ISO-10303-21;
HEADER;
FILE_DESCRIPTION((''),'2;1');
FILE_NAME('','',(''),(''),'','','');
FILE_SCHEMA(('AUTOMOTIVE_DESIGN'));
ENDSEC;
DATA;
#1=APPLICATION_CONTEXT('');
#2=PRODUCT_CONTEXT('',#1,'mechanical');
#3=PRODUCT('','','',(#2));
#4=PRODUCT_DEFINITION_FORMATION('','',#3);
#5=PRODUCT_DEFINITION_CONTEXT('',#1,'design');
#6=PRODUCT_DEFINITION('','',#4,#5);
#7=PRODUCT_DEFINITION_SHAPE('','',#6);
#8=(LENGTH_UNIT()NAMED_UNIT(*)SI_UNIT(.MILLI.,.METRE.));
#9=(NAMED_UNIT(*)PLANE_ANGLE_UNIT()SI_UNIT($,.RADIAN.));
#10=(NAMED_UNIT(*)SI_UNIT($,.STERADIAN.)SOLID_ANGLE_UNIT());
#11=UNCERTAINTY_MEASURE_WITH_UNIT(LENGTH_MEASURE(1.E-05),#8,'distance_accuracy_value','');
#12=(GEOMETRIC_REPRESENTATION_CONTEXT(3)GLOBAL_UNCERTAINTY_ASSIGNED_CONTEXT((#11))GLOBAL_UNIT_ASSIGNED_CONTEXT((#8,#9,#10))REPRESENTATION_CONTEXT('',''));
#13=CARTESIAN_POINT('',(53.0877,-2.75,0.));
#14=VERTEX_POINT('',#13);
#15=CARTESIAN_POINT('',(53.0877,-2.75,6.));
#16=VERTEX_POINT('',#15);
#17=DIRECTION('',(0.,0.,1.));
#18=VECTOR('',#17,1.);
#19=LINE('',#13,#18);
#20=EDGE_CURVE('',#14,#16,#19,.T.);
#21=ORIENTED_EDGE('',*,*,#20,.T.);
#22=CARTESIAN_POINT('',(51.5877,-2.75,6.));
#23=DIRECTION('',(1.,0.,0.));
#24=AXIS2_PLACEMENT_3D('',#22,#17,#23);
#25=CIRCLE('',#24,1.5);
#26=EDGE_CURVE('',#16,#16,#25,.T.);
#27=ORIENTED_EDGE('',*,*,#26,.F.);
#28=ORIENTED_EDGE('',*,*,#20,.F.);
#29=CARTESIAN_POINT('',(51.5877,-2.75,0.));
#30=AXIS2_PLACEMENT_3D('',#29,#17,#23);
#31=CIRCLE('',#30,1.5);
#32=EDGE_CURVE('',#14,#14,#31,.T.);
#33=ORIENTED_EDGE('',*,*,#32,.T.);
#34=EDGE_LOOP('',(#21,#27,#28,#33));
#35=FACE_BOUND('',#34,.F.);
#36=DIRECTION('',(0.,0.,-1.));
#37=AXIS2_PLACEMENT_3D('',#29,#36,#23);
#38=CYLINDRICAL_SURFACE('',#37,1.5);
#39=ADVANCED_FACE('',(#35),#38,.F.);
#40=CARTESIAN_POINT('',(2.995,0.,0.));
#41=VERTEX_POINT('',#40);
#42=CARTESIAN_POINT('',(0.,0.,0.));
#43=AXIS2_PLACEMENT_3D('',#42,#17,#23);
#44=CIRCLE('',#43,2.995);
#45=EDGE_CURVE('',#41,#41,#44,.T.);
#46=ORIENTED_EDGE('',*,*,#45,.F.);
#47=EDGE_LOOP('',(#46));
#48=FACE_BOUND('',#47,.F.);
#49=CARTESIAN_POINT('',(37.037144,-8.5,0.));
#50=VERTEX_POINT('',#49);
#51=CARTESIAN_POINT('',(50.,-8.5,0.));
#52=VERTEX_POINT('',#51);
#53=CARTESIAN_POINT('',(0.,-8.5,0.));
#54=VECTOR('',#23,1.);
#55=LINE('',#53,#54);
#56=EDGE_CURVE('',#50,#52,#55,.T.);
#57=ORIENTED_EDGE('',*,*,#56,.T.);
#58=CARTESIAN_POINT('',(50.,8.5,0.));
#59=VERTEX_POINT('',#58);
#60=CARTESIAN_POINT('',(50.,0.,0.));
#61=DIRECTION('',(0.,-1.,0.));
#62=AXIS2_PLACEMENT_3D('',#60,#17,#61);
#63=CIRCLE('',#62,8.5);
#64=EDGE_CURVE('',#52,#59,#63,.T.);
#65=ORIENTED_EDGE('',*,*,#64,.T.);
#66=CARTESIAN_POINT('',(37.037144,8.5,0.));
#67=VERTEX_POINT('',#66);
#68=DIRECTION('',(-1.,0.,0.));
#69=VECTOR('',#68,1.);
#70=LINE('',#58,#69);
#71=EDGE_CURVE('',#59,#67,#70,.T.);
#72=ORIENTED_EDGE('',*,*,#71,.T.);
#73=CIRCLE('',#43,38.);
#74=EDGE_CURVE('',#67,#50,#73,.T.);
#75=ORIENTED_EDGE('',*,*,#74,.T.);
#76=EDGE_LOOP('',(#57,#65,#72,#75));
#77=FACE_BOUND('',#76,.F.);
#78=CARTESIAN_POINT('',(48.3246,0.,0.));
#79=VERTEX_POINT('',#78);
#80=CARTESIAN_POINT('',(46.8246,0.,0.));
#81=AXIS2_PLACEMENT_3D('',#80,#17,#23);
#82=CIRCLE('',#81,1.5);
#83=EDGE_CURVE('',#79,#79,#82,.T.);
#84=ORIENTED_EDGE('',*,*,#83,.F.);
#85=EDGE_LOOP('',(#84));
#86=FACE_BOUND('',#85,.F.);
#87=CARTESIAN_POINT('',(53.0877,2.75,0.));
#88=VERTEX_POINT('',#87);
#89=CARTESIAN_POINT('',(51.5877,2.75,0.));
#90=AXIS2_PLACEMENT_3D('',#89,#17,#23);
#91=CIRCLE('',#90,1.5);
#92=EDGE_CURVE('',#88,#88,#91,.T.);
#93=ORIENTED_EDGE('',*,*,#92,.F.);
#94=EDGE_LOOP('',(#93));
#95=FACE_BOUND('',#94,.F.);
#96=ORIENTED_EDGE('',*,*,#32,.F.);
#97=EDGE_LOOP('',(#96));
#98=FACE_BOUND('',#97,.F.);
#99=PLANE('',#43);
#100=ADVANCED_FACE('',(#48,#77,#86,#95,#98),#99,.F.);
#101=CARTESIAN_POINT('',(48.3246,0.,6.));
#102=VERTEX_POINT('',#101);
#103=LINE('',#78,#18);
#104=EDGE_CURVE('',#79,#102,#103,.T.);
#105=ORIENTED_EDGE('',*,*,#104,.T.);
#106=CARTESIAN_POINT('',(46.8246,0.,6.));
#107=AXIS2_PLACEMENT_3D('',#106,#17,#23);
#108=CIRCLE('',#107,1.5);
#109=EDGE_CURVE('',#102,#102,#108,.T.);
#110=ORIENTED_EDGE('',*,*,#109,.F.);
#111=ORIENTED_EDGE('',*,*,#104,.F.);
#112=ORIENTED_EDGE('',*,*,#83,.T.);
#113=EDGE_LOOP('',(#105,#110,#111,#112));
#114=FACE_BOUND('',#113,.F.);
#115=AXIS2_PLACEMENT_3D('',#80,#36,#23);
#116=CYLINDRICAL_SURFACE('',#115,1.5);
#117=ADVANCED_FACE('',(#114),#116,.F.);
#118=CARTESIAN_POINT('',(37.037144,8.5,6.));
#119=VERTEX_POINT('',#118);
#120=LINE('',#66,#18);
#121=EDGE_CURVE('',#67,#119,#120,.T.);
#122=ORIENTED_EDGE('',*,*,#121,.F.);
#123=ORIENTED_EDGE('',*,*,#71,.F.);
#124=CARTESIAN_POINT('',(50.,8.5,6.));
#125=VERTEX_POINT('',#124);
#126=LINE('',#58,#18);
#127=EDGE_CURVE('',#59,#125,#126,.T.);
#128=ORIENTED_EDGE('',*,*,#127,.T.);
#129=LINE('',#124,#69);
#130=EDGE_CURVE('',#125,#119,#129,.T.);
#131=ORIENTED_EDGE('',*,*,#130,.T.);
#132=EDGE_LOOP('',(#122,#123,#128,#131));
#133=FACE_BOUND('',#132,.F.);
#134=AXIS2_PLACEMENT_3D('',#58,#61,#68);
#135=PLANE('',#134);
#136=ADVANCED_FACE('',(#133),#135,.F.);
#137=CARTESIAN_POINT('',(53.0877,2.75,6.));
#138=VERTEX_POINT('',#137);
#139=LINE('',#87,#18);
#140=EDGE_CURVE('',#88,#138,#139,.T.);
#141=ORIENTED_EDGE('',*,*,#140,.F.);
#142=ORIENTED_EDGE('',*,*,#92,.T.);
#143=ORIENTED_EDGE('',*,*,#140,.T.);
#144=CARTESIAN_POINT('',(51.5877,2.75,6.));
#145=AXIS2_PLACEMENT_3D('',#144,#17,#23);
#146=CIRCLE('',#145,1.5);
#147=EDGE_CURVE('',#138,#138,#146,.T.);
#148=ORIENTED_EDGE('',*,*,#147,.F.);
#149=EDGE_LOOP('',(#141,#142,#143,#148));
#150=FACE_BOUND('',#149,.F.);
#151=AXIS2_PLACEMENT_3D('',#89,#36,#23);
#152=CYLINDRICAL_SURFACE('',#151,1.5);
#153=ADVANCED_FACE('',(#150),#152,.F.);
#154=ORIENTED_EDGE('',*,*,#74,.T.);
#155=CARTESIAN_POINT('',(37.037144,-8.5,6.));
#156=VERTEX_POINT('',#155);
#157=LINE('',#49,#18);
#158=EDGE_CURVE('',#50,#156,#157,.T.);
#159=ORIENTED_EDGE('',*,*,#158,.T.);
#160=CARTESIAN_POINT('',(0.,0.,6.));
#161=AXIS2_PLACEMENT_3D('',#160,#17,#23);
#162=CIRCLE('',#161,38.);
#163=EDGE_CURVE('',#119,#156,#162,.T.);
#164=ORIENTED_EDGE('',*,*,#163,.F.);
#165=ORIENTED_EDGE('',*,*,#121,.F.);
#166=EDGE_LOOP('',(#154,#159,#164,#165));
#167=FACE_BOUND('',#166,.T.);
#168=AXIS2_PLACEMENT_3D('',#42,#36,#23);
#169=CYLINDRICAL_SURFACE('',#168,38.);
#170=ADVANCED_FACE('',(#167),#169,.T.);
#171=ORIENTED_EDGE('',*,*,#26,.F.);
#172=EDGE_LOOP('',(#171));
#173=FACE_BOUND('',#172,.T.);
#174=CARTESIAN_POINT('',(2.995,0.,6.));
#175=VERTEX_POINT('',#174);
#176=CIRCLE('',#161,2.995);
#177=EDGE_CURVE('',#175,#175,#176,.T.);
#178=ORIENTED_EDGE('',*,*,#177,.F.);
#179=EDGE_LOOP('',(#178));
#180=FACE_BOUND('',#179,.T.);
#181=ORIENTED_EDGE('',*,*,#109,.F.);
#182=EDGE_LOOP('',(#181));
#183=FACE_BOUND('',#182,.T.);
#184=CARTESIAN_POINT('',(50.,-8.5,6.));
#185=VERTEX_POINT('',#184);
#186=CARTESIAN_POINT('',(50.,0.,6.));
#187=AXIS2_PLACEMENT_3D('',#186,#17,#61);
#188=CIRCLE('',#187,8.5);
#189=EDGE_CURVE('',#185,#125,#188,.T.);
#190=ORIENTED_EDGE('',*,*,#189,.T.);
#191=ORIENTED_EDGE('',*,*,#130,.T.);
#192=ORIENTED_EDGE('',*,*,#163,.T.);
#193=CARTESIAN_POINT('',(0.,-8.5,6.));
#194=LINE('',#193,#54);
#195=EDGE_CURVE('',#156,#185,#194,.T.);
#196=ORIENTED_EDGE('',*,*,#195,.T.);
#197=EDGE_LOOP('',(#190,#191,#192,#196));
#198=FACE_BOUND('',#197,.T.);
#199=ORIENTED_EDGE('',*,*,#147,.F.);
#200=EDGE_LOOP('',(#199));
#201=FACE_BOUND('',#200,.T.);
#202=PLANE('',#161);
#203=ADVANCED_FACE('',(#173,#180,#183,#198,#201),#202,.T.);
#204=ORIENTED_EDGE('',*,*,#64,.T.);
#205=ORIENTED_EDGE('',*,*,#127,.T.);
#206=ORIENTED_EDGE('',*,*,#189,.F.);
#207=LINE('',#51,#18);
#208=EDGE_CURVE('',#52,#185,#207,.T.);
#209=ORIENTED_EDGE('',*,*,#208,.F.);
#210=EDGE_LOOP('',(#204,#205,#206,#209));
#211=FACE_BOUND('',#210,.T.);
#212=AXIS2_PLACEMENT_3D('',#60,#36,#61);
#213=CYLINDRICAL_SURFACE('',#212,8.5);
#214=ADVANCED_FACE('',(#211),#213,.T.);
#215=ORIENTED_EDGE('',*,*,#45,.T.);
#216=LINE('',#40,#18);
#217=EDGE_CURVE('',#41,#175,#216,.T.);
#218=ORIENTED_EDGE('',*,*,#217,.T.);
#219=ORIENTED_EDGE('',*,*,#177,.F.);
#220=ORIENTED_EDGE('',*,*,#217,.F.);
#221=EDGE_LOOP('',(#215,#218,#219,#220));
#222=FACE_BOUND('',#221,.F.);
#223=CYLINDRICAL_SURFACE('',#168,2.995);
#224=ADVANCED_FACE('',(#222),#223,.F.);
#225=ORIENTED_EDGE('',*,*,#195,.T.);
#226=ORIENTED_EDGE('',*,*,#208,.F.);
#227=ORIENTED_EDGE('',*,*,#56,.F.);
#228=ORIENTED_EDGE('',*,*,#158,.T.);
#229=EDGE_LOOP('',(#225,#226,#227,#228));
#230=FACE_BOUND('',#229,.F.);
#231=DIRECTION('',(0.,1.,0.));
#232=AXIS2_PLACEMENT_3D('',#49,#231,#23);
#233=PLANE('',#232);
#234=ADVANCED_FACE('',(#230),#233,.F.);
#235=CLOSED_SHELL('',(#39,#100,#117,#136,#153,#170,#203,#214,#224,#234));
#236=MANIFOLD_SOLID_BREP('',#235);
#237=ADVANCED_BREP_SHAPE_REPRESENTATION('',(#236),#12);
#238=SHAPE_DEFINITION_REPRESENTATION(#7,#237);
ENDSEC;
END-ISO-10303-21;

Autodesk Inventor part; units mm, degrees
ref_plane "YZ Plane" through (0, 0, 0) normal (1, 0, 0) x (0, 1, 0)
ref_plane "XZ Plane" through (0, 0, 0) normal (0, 1, 0) x (-1, 0, 0)
ref_plane "XY Plane" through (0, 0, 0) normal (0, 0, 1) x (1, 0, 0)
sketch "スケッチ1" plane through (0, 0, 0) normal (0, 0, 1) x (1, 0, 0)
  circle A0 centre (0, 0) radius 38
  line L0 (0, 0) -> (50, 0) construction
  line L1 (0, -8.5) -> (50, -8.5)
  line L2 (50, 8.5) -> (0, 8.5)
  arc A1 (0, 8.5) -> (0, -8.5) centre (0, 0) ccw
  arc A2 (50, -8.5) -> (50, 8.5) centre (50, 0) ccw
  line L3 (46.8246, 0) -> (51.5877, 2.75) construction
  line L4 (51.5877, 2.75) -> (51.5877, -2.75) construction
  line L5 (51.5877, -2.75) -> (46.8246, 0) construction
  circle A3 centre (51.5877, 2.75) radius 1.5
  circle A4 centre (46.8246, 0) radius 1.5
  circle A5 centre (51.5877, -2.75) radius 1.5
  circle A6 centre (0, 0) radius 2.995
  point P0 (25, 0)
  dimension "d0" = 76
  dimension "d2" = 50
  dimension "d3" = 17
  dimension "d4" = 3
  dimension "d5" = 3
  dimension "d6" = 3
  dimension "d7" = 5.5
  dimension "d8" = 5.99
extrude "押し出し1" add sketch "スケッチ1" along normal blind 6
properties part number "アーム最終段円盤" material "アルミニウム 7075"
